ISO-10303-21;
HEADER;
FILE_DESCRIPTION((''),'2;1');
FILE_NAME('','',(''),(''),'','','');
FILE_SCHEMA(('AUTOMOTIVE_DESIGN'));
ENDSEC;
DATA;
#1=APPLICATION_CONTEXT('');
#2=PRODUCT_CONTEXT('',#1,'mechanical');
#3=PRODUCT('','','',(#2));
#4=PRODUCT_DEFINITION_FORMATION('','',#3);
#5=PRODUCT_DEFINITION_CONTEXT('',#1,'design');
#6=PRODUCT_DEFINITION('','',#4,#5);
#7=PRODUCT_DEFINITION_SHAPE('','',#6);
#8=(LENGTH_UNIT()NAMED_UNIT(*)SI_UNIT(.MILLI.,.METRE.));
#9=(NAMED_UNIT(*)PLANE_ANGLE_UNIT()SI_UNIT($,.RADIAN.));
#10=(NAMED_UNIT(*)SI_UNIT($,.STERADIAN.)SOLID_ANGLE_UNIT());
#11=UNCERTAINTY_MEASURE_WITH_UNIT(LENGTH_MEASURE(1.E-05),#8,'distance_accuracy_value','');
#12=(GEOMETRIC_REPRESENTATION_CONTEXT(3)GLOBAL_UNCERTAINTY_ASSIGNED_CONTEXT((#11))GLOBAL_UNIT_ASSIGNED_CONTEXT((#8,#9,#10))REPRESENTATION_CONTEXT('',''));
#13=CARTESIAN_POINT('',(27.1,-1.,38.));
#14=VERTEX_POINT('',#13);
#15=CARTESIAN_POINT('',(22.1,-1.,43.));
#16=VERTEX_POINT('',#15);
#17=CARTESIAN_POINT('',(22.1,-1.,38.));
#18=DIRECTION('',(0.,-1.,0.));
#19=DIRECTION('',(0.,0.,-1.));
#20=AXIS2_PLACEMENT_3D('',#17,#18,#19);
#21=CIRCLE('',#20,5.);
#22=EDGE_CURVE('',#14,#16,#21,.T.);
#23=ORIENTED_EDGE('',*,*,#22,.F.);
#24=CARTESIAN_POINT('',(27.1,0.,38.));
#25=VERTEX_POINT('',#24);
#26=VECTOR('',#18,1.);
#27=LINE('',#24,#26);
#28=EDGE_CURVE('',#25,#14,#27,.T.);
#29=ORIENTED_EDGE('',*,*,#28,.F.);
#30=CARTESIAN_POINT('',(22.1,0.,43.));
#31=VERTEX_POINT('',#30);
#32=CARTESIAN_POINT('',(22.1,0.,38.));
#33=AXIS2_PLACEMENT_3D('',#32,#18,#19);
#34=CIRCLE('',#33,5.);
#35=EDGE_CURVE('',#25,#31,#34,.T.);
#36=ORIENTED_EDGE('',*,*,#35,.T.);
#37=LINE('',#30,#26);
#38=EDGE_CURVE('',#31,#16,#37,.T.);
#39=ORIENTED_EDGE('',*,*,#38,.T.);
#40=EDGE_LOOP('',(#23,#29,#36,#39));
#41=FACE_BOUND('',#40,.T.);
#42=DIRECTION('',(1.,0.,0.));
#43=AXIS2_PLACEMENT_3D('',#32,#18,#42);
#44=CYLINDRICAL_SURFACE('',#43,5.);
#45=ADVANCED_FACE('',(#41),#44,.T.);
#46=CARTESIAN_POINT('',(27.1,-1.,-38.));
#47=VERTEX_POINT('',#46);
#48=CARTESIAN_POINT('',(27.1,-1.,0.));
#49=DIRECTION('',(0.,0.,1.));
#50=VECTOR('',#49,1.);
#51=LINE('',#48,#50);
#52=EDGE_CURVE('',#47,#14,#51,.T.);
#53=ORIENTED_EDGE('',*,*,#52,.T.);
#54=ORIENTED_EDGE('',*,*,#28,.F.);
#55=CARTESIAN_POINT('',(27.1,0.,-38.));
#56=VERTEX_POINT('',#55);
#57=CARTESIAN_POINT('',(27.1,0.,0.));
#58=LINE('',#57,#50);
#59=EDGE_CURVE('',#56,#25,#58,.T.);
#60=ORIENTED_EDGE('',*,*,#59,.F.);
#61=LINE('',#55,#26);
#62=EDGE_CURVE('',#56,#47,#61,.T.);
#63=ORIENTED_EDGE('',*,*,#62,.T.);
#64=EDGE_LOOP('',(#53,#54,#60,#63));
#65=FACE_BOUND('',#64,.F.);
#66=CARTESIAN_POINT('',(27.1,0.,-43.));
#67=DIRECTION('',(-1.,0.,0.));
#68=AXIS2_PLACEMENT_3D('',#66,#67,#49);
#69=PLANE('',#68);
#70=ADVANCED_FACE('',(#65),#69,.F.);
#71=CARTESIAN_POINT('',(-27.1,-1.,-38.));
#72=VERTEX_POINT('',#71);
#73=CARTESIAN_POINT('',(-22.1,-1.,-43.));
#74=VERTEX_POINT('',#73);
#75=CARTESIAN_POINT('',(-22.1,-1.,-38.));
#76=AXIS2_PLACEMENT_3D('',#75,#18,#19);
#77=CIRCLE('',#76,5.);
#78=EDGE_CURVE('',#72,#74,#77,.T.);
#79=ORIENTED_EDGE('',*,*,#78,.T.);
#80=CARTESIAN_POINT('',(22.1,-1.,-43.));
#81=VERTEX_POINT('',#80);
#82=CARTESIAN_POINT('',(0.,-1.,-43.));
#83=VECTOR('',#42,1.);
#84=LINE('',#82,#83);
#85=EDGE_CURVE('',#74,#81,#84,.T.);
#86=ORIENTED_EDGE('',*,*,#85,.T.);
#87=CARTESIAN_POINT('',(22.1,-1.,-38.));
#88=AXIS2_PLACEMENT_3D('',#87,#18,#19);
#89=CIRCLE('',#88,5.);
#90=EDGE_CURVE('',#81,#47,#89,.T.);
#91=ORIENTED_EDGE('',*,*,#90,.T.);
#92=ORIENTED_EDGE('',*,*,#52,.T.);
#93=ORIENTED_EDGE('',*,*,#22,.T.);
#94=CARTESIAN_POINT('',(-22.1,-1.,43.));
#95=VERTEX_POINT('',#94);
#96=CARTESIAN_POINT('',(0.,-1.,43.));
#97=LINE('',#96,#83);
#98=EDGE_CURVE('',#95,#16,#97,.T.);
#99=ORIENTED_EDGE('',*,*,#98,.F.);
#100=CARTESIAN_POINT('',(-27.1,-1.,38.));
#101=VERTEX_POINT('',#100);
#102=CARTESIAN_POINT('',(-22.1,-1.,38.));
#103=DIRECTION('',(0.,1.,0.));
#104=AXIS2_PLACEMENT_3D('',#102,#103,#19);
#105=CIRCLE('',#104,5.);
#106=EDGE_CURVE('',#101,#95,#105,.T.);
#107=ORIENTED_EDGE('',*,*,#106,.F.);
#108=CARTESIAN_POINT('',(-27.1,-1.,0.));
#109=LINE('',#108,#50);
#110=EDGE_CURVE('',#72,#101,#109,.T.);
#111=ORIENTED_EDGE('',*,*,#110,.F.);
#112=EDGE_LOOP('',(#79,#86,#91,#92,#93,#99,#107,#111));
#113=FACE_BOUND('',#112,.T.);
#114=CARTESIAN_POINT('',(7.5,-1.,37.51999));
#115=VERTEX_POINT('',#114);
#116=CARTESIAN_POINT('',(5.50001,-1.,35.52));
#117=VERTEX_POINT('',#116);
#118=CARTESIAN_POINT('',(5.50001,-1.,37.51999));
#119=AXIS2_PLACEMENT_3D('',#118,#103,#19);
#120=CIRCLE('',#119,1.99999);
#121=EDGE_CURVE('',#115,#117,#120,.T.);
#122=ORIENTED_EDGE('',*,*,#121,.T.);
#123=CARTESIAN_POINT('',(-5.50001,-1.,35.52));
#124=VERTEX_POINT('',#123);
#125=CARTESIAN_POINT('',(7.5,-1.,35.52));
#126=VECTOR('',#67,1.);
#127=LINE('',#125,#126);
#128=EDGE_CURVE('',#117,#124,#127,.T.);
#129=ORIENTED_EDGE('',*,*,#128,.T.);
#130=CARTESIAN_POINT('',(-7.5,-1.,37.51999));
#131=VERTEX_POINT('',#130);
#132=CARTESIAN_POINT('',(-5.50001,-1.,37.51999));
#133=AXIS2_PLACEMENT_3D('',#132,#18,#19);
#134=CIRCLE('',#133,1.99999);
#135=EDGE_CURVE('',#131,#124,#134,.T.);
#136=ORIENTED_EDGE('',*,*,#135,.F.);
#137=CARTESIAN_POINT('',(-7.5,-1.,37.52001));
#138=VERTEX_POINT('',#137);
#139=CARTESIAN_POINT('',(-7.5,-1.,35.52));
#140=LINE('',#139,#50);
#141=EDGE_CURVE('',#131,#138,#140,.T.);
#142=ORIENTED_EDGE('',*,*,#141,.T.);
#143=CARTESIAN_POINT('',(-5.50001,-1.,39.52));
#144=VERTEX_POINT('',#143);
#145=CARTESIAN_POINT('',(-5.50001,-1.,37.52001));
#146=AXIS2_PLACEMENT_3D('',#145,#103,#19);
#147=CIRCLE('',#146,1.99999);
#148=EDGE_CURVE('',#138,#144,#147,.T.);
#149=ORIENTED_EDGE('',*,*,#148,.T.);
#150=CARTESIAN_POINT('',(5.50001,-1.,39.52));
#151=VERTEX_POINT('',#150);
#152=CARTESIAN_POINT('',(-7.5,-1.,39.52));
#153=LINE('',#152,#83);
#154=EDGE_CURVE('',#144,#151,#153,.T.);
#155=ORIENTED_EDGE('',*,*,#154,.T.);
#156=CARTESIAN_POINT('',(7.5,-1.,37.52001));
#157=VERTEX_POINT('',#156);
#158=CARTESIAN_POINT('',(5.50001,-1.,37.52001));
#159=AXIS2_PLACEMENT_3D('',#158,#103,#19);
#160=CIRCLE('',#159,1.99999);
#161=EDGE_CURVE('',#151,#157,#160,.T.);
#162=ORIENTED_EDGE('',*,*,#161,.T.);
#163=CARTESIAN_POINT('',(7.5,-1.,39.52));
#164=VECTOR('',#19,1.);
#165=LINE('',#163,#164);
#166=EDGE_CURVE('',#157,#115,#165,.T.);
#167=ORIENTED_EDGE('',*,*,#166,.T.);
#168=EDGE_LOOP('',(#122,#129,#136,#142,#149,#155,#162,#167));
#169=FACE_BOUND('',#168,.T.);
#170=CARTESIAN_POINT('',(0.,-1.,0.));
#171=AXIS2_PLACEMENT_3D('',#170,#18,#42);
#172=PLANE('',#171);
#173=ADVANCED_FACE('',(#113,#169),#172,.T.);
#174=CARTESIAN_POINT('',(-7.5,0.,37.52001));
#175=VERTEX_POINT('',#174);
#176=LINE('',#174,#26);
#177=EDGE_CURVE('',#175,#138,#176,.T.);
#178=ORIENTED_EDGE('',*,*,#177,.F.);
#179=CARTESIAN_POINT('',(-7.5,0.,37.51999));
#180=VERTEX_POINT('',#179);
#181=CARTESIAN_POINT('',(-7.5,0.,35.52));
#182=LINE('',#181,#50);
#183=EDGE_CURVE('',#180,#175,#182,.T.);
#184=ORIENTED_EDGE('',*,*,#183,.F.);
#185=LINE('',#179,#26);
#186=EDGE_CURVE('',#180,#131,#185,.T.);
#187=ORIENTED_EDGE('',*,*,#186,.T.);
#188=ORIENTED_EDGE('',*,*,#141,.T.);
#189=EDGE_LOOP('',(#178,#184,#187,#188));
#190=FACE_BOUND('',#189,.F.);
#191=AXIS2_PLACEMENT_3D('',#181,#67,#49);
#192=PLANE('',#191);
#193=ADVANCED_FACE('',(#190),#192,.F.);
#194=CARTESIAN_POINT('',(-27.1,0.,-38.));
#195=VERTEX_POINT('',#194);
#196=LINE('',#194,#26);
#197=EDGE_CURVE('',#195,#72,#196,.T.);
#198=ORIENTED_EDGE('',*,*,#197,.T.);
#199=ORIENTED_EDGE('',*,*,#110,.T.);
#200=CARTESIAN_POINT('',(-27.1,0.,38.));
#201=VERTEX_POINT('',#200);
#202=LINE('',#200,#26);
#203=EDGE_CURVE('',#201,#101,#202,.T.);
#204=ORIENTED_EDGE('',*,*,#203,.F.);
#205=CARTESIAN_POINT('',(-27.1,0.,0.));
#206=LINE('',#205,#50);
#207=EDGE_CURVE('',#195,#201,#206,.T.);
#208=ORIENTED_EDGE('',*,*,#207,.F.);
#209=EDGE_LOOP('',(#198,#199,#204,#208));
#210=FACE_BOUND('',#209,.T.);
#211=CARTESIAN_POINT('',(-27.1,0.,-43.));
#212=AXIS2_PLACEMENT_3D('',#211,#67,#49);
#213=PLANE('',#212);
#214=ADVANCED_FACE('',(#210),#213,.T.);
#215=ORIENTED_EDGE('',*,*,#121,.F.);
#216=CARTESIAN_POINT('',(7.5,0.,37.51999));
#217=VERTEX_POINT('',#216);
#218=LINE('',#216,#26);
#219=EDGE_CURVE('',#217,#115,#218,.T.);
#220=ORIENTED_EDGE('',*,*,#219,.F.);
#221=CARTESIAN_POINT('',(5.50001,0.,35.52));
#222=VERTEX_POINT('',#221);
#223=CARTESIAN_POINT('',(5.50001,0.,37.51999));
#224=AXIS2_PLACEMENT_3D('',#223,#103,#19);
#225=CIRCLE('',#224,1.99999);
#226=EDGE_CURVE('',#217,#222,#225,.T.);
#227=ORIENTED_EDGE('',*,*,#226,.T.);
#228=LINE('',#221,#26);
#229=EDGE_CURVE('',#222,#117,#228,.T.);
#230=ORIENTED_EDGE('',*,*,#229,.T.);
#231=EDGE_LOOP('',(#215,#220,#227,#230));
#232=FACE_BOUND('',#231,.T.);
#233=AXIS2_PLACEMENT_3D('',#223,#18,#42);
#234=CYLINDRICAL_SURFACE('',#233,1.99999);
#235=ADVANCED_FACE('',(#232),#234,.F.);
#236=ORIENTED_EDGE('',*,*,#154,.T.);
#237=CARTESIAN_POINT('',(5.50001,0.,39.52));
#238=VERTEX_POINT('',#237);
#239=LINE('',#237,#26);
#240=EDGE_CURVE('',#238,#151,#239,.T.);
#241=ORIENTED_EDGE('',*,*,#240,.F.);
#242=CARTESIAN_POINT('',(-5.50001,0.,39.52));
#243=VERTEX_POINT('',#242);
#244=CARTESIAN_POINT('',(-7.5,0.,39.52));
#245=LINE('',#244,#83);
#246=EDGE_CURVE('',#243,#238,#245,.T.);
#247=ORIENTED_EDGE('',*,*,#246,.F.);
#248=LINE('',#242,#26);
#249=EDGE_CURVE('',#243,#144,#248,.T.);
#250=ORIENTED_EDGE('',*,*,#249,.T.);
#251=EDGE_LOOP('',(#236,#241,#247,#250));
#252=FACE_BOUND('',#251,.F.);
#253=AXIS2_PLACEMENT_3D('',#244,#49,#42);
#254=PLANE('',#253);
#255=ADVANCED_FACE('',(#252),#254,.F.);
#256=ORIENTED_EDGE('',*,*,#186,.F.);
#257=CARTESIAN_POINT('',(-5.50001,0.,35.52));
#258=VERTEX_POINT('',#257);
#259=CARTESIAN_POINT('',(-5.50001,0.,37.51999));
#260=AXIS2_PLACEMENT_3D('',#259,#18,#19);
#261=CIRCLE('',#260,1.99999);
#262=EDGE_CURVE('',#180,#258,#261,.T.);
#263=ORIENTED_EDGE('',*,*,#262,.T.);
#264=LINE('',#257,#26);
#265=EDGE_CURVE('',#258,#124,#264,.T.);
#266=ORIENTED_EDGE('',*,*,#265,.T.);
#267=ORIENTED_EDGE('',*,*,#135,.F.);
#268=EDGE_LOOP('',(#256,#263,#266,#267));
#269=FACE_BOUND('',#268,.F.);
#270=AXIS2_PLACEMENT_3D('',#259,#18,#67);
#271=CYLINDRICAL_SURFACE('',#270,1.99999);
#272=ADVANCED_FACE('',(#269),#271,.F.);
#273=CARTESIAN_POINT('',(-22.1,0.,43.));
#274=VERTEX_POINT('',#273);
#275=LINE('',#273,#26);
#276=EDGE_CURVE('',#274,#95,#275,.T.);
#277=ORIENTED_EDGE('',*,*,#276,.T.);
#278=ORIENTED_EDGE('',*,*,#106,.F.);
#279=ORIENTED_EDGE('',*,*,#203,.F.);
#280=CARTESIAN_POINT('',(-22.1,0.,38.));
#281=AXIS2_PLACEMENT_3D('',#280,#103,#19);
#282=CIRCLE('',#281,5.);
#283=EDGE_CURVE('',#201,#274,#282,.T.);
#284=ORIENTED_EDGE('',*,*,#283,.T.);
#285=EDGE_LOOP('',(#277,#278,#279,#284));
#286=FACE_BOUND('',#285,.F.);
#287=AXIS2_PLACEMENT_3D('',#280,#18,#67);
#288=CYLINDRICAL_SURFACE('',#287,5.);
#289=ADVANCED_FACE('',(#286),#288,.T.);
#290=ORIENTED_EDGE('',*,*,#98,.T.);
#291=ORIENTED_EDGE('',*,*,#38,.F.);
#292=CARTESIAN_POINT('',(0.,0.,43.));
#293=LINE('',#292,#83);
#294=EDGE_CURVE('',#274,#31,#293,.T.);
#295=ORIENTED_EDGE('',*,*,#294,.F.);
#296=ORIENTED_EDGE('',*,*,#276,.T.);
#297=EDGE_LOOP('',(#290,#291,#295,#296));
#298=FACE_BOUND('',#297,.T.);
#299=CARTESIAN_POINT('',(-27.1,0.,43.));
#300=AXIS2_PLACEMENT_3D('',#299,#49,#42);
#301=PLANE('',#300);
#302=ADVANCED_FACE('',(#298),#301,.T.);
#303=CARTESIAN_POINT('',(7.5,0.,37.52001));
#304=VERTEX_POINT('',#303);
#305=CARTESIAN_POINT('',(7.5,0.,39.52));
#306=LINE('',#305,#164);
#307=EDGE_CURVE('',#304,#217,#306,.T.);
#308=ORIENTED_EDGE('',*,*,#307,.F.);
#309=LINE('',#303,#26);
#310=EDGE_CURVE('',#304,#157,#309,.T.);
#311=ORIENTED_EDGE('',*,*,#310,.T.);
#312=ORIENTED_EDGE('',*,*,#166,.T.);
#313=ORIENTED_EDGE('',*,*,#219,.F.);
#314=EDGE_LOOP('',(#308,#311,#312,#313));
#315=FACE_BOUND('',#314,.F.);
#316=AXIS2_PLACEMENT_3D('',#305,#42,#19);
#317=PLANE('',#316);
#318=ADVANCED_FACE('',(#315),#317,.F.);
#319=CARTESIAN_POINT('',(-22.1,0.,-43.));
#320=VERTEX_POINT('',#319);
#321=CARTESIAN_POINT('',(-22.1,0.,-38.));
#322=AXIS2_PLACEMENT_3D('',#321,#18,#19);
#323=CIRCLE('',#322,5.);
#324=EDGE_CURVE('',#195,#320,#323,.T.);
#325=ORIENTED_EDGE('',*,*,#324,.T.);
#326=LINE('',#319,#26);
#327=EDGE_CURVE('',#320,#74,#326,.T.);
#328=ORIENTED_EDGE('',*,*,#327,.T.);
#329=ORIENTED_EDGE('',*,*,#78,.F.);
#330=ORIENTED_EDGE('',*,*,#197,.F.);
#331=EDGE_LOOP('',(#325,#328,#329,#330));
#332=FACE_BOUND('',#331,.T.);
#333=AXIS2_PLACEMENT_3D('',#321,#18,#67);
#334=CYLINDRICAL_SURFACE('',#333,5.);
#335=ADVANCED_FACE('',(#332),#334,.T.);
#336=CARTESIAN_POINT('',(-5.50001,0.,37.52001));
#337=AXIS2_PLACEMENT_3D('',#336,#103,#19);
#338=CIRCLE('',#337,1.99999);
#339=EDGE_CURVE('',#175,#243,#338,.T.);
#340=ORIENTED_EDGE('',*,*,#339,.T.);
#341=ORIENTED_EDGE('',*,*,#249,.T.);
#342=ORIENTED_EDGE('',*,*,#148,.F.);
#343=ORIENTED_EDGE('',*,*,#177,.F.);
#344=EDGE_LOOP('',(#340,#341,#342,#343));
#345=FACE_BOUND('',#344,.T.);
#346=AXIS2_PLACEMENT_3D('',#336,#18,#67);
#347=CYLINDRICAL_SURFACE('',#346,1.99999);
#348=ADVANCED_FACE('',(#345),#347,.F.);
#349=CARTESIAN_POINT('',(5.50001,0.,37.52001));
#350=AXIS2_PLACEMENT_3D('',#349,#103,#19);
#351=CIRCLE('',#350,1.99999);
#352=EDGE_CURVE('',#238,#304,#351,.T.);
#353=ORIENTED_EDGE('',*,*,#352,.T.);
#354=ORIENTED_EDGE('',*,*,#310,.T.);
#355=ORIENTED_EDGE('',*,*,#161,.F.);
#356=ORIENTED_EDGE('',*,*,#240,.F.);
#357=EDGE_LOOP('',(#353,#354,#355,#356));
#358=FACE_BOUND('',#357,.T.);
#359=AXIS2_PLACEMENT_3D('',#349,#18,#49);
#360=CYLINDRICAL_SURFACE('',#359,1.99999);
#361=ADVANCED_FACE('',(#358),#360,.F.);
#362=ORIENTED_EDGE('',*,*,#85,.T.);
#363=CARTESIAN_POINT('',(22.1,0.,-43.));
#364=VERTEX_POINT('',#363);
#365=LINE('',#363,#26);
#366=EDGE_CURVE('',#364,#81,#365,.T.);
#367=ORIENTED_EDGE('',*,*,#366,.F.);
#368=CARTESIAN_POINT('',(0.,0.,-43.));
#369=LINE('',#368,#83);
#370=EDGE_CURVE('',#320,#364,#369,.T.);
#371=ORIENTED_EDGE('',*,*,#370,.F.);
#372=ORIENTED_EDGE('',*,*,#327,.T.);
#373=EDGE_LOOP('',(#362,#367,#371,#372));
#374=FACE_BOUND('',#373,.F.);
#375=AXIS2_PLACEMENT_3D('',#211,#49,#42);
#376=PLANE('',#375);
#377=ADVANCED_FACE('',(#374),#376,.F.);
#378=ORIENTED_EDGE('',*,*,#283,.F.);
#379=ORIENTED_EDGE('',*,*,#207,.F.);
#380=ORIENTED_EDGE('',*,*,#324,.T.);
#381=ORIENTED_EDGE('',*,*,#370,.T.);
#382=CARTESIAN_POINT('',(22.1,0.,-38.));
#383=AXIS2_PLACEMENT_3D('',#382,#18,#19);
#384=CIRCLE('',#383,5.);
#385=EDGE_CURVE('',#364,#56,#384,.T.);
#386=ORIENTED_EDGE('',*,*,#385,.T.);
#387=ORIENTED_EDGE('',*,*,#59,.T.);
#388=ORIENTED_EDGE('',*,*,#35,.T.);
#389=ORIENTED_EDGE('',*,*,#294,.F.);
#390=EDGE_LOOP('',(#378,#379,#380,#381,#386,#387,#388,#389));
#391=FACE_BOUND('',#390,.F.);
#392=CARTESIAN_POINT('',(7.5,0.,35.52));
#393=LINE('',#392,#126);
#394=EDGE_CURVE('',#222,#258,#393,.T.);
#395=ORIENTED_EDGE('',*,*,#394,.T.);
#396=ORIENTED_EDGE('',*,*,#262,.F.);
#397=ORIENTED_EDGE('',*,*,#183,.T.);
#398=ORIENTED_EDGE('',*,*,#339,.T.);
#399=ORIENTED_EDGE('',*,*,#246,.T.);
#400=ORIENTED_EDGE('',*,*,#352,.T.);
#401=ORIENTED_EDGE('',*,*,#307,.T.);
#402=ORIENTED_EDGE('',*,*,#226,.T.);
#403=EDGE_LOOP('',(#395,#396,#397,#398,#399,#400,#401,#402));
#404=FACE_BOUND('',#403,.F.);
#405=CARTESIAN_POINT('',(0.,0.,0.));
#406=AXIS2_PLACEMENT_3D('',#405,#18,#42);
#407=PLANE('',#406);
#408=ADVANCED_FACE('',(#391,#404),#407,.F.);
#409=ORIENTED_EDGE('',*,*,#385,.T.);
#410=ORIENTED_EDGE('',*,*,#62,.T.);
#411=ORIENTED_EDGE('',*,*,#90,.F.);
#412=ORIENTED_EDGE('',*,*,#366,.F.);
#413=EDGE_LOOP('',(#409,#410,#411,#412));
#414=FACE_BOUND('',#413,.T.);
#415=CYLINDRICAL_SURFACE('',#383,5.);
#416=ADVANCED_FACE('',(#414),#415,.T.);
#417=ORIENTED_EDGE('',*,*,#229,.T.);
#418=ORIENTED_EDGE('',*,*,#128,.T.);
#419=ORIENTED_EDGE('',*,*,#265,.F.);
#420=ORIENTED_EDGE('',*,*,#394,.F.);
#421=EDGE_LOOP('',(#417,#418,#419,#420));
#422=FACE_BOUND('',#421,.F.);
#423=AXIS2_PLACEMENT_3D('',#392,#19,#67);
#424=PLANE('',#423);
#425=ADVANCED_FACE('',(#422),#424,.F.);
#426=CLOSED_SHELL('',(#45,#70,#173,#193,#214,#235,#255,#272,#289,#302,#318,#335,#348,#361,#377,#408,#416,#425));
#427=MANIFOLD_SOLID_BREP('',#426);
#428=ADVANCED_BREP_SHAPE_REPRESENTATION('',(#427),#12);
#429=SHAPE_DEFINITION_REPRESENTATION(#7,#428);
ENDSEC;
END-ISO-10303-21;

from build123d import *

# Parameters (mm, degrees)
F0_W     = 54.2
F0_H     = 86
F1_DEPTH = 1
F2_R     = 5
F3_R     = 1.99999


# Not quite as in the source:
# - a fillet or chamfer is up to 0.001 mm smaller than in the source, because OpenCascade refuses the exact size


with BuildPart() as f1:
    # F0 (on Front) → F1 (new body)
    with BuildSketch(Plane.XZ):
        Rectangle(F0_W, F0_H)
        Polygon((-7.5, 37.52), (-7.5, 39.52), (7.5, 39.52), (7.5, 37.52), (7.5, 35.52), (-7.5, 35.52), align=None, mode=Mode.SUBTRACT)
    extrude(amount=F1_DEPTH)

    # F2
    f2_edges = [f1.edges().sort_by_distance(p)[0] for p in [
        (-27.1, -0.5, 43),
        (27.1, -0.5, 43),
        (27.1, -0.5, -43),
        (-27.1, -0.5, -43),
    ]]
    fillet(f2_edges, radius=F2_R)

    # F3 (radius 2 in the source; OpenCascade refuses exactly that, so slightly less here)
    f3_edges = [f1.edges().sort_by_distance(p)[0] for p in [
        (-7.5, -0.5, 39.52),
        (-7.5, -0.5, 35.52),
        (7.5, -0.5, 35.52),
        (7.5, -0.5, 39.52),
    ]]
    fillet(f3_edges, radius=F3_R)


solid = f1.part
